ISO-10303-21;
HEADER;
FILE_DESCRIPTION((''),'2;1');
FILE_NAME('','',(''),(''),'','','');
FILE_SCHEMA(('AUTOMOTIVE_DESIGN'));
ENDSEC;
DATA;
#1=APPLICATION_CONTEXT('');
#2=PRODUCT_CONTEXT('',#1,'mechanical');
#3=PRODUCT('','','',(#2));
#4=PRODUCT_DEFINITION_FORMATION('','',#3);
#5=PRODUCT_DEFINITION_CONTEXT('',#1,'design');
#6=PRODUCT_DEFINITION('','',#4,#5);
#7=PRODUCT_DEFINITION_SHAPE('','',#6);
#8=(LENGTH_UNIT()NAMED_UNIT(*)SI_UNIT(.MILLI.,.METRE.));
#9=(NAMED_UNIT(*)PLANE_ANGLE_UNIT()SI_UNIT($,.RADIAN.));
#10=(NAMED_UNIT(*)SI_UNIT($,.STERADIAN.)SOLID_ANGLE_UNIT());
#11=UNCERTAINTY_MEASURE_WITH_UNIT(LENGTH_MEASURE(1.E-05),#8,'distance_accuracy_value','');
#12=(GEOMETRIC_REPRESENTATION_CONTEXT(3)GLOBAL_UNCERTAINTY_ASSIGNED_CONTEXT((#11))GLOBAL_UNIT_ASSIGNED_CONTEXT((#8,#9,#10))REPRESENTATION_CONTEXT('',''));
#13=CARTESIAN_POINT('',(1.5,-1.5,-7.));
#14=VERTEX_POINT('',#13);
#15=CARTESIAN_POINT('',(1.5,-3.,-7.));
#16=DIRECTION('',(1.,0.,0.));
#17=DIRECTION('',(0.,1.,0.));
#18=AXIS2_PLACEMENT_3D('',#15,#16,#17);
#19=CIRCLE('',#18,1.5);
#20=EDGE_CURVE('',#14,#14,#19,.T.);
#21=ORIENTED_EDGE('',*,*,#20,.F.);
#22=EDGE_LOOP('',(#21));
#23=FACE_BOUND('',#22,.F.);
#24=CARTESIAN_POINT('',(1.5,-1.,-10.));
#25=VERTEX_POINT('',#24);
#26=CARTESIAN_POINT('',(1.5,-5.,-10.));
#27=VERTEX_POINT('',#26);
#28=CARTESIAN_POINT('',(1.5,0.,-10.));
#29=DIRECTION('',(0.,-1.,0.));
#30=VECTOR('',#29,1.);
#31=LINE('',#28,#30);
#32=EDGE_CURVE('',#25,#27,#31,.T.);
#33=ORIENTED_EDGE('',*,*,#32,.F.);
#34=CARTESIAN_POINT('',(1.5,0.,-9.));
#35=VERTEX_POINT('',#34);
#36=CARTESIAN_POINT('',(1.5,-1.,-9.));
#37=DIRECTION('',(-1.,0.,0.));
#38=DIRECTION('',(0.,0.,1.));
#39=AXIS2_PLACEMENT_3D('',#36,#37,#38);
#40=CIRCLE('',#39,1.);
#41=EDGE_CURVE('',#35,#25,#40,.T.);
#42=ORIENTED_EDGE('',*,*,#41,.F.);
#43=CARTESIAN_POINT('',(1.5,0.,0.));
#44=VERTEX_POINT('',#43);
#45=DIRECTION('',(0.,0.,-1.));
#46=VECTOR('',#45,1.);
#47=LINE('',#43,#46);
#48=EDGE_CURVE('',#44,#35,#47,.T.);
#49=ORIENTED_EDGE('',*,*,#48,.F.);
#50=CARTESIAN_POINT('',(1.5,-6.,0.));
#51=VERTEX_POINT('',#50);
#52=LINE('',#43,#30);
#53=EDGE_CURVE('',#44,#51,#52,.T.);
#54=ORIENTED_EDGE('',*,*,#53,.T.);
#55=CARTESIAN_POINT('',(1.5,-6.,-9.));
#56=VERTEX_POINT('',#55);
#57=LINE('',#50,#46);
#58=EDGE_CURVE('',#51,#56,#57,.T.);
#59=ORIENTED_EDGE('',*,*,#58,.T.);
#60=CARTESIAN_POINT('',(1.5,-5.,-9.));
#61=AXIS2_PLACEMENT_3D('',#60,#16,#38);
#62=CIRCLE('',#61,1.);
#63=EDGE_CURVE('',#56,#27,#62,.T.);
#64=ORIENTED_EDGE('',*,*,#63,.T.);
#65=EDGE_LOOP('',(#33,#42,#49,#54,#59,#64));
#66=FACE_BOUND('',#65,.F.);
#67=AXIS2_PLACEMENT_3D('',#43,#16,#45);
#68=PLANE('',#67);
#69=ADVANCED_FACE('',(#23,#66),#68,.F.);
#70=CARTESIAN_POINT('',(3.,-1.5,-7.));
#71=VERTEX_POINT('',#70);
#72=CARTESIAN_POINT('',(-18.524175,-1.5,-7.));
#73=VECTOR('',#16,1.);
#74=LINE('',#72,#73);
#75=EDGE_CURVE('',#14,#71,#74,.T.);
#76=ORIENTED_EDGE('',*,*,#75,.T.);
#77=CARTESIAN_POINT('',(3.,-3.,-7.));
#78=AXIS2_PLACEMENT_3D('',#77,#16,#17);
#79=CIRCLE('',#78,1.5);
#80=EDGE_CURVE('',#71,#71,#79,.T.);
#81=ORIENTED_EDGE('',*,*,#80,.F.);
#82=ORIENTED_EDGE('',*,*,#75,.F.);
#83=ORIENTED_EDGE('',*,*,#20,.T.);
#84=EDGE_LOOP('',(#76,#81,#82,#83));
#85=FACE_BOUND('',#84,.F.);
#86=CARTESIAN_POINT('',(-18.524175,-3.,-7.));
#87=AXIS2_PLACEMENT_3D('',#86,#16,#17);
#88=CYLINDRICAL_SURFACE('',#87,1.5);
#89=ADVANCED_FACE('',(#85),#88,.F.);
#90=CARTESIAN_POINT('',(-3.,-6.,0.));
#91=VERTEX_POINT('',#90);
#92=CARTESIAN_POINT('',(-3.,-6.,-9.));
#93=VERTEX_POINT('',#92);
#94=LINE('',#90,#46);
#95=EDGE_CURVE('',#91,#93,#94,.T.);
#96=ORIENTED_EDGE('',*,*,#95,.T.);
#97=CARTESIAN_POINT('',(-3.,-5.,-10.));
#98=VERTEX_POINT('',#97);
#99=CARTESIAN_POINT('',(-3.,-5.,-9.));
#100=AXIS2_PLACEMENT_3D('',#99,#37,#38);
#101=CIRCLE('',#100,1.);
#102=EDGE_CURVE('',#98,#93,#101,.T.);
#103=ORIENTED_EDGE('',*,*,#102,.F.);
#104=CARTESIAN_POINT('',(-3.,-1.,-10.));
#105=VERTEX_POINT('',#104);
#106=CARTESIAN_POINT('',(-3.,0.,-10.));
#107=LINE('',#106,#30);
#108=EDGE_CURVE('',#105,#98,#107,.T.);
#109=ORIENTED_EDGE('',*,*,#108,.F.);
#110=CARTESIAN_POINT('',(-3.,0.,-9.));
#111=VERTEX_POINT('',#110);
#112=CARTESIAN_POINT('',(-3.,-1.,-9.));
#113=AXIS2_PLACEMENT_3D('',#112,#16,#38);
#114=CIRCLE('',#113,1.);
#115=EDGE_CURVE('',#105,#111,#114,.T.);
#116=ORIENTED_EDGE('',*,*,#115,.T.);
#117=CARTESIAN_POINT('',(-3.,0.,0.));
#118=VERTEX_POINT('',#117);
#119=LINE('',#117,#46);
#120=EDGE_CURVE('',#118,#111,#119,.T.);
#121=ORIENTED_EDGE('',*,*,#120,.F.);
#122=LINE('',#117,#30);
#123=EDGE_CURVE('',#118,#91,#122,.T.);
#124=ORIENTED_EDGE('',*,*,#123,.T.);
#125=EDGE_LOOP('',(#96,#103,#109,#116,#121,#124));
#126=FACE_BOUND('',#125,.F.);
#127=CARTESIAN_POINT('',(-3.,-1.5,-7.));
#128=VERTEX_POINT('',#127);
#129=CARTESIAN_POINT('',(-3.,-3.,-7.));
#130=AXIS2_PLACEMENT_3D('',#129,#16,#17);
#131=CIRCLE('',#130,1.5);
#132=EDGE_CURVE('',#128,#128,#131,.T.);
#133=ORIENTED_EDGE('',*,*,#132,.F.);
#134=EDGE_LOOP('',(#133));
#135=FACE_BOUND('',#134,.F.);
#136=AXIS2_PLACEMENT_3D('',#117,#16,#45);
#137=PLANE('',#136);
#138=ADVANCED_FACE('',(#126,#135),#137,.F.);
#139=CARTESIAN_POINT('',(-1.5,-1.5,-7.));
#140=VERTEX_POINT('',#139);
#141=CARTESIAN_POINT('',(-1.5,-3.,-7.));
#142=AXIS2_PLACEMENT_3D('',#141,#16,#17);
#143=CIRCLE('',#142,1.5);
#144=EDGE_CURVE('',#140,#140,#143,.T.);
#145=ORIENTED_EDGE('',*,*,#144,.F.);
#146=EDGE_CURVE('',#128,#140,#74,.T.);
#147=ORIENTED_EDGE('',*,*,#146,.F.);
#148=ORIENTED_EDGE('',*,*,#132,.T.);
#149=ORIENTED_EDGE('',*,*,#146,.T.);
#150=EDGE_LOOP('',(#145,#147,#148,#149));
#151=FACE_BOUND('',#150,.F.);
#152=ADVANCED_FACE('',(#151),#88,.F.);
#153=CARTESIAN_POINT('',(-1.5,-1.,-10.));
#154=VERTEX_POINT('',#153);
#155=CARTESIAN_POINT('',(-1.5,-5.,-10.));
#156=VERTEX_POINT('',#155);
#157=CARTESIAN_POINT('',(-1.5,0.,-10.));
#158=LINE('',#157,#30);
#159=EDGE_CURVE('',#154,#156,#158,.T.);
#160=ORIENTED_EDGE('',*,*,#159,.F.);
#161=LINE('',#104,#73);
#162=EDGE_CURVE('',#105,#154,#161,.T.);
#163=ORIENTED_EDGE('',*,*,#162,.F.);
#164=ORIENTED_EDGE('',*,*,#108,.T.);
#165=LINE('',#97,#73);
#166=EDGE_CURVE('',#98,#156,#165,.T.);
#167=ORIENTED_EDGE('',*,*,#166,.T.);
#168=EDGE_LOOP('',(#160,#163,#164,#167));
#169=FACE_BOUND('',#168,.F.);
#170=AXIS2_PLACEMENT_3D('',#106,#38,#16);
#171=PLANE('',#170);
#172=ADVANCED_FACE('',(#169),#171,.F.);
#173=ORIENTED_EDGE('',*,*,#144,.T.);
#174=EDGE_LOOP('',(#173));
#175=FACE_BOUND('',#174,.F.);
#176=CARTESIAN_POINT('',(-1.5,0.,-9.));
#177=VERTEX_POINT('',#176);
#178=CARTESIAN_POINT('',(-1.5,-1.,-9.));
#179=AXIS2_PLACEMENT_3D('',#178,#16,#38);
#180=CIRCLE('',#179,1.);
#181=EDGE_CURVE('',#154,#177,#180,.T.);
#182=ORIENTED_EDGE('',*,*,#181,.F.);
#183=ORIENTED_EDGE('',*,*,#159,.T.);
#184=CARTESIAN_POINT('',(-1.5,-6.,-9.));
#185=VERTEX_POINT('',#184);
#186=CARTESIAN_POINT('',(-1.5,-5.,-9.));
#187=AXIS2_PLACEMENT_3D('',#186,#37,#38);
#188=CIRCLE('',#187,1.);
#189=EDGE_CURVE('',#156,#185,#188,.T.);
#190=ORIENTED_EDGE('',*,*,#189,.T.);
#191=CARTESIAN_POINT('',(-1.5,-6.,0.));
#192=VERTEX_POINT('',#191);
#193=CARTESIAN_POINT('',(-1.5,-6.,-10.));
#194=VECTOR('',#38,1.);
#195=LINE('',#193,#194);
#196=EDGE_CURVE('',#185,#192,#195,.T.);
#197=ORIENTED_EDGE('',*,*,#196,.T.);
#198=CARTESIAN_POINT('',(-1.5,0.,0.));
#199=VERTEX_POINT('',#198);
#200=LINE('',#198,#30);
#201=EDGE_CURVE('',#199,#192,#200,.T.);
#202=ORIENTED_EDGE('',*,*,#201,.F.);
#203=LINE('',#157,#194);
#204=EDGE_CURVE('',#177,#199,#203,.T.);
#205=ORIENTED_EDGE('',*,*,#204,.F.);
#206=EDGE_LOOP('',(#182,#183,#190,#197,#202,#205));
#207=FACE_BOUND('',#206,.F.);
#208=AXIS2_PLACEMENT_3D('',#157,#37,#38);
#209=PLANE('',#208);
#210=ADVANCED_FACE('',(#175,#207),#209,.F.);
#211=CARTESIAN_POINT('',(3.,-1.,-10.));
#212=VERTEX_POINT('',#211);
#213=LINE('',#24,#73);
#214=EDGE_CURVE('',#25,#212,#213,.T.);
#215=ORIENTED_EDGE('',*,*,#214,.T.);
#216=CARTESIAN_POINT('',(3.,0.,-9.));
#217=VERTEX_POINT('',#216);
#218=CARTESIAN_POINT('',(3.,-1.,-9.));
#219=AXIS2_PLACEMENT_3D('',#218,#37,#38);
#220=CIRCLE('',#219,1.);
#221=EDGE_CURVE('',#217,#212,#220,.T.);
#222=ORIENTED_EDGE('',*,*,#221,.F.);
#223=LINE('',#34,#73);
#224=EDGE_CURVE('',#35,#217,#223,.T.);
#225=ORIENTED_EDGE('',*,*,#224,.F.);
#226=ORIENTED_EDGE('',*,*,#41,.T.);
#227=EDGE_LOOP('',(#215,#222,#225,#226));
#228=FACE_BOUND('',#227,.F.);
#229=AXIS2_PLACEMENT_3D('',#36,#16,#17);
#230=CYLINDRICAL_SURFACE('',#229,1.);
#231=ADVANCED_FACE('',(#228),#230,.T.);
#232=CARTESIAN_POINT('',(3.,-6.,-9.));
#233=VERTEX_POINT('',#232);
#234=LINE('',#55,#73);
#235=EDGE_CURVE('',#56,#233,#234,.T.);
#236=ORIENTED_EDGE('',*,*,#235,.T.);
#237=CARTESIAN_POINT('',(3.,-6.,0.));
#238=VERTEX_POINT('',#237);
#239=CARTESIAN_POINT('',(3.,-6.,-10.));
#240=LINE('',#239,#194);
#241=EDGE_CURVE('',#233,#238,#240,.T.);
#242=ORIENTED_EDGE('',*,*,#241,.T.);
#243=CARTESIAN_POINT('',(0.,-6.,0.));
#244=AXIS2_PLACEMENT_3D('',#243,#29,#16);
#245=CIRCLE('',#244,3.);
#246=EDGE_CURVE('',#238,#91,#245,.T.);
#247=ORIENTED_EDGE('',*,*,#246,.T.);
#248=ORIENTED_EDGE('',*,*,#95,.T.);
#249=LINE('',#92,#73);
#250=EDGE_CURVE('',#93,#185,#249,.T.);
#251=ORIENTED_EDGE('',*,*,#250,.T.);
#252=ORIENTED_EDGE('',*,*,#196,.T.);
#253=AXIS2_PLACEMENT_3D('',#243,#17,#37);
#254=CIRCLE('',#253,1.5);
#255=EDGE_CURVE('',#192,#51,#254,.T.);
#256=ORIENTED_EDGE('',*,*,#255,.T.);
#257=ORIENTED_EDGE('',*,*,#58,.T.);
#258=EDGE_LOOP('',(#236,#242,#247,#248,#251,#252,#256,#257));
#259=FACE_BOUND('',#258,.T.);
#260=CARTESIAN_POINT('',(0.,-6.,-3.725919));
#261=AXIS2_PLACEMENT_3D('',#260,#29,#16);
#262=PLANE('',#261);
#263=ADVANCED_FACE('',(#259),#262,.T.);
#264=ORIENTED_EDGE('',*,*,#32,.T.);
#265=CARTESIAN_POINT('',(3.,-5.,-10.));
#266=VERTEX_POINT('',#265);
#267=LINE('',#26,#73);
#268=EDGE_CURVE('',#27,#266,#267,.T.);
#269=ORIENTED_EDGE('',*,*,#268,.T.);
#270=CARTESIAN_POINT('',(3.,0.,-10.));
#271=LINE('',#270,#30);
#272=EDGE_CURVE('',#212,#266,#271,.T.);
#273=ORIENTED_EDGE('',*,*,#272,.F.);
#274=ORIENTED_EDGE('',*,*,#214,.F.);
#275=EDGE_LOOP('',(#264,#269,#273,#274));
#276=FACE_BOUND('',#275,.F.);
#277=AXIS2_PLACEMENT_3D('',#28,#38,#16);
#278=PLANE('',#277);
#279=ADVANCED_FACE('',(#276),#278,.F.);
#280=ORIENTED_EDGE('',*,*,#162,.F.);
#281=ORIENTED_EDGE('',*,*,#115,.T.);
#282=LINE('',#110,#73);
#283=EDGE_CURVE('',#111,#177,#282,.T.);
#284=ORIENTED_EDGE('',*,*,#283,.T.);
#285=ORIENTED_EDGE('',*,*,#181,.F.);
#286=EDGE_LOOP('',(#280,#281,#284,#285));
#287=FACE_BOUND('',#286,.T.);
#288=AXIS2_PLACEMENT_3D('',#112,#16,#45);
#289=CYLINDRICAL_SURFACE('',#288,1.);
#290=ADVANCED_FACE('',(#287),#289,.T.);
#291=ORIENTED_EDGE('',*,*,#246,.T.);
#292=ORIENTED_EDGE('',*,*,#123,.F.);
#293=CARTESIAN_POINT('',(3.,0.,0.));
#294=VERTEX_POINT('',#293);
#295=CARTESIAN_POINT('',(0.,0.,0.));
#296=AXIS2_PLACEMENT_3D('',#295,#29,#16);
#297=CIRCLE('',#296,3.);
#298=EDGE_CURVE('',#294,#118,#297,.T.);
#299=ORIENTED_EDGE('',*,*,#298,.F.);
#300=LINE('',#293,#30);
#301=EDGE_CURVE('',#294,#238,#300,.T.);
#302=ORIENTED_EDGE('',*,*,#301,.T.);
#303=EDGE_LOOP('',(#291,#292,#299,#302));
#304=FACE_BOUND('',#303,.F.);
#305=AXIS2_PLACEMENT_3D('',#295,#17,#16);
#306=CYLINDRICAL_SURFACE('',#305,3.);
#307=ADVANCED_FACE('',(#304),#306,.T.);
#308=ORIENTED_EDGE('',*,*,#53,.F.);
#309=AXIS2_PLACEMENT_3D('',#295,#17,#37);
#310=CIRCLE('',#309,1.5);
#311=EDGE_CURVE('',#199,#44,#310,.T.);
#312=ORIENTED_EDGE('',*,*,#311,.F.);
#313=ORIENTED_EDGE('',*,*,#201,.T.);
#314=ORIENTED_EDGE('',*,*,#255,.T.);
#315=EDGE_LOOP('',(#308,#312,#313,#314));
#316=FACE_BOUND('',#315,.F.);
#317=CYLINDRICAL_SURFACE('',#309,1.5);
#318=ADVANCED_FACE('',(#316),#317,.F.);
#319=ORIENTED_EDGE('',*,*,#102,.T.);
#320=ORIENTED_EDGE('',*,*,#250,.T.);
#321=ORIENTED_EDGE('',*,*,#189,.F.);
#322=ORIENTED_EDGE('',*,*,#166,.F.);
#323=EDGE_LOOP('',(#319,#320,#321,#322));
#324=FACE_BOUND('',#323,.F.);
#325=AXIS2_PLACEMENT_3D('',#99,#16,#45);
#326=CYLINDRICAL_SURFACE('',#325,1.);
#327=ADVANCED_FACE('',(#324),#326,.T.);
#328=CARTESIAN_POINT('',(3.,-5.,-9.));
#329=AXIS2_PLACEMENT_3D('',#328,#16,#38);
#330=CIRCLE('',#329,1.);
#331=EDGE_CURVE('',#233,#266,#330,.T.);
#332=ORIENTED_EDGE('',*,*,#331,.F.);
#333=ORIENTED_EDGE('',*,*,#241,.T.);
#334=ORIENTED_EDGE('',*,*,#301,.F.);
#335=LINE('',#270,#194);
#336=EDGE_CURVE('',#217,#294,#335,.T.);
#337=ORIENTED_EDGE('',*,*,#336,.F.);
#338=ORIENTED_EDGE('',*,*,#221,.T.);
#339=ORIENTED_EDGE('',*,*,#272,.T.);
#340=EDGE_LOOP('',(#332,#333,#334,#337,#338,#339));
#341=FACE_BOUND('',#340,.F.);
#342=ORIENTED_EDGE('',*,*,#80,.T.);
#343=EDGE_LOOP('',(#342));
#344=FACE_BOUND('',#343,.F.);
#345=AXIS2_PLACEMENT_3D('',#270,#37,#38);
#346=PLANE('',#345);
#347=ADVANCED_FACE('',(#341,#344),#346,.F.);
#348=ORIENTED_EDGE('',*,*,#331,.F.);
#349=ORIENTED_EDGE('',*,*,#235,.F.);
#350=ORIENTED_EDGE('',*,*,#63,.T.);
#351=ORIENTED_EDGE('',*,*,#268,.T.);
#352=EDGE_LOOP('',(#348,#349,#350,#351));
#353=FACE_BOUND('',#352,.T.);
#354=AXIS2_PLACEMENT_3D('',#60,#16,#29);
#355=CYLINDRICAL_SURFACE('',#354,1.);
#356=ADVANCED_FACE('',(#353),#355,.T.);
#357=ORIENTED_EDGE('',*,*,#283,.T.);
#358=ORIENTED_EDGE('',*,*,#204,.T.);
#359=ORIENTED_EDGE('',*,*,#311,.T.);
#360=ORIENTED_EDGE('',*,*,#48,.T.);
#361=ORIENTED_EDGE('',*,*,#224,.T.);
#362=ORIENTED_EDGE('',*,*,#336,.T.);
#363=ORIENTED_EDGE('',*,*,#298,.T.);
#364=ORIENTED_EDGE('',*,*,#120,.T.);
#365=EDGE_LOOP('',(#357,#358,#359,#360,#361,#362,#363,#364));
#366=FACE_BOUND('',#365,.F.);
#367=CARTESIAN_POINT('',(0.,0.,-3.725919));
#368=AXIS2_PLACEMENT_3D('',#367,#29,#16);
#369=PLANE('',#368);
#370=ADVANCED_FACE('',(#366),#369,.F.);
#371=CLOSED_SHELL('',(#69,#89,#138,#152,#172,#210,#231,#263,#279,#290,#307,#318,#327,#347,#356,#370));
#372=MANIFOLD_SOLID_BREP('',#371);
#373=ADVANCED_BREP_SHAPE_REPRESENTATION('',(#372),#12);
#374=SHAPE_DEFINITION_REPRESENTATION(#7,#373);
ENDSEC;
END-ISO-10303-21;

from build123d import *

# Parameters (mm, degrees)
F1_DEPTH = 6
F3_D     = 3
F4_R     = 1


# Not quite as in the source:
# - a feature names something its author has since deleted; it is built from what else it names


with BuildPart() as f1:
    # F0 (on Front) → F1 (new body)
    with BuildSketch(Plane.XZ):
        with BuildLine():
            Line((-1.5, -10), (-1.5, 0))
            ThreePointArc((-1.5, 0), (0, 1.5), (1.5, 0))
            Line((1.5, 0), (1.5, -10))
            Line((1.5, -10), (3, -10))
            Line((3, -10), (3, 0))
            ThreePointArc((3, 0), (0, 3), (-3, 0))
            Line((-3, 0), (-3, -10))
            Line((-3, -10), (-1.5, -10))
        make_face()
    extrude(amount=F1_DEPTH)

    # F3 (through all)
    with Locations(Plane(origin=(-3, 0, 0), x_dir=(0, -1, 0), z_dir=(-1, 0, 0))):
        with Locations((3, -7)):
            Hole(F3_D / 2)

    # F4
    f4_edges = [f1.edges().sort_by_distance(p)[0] for p in [
        (-2.25, -6, -10),
        (2.25, -6, -10),
        (2.25, 0, -10),
        (-2.25, 0, -10),
    ]]
    fillet(f4_edges, radius=F4_R)


solid = f1.part
